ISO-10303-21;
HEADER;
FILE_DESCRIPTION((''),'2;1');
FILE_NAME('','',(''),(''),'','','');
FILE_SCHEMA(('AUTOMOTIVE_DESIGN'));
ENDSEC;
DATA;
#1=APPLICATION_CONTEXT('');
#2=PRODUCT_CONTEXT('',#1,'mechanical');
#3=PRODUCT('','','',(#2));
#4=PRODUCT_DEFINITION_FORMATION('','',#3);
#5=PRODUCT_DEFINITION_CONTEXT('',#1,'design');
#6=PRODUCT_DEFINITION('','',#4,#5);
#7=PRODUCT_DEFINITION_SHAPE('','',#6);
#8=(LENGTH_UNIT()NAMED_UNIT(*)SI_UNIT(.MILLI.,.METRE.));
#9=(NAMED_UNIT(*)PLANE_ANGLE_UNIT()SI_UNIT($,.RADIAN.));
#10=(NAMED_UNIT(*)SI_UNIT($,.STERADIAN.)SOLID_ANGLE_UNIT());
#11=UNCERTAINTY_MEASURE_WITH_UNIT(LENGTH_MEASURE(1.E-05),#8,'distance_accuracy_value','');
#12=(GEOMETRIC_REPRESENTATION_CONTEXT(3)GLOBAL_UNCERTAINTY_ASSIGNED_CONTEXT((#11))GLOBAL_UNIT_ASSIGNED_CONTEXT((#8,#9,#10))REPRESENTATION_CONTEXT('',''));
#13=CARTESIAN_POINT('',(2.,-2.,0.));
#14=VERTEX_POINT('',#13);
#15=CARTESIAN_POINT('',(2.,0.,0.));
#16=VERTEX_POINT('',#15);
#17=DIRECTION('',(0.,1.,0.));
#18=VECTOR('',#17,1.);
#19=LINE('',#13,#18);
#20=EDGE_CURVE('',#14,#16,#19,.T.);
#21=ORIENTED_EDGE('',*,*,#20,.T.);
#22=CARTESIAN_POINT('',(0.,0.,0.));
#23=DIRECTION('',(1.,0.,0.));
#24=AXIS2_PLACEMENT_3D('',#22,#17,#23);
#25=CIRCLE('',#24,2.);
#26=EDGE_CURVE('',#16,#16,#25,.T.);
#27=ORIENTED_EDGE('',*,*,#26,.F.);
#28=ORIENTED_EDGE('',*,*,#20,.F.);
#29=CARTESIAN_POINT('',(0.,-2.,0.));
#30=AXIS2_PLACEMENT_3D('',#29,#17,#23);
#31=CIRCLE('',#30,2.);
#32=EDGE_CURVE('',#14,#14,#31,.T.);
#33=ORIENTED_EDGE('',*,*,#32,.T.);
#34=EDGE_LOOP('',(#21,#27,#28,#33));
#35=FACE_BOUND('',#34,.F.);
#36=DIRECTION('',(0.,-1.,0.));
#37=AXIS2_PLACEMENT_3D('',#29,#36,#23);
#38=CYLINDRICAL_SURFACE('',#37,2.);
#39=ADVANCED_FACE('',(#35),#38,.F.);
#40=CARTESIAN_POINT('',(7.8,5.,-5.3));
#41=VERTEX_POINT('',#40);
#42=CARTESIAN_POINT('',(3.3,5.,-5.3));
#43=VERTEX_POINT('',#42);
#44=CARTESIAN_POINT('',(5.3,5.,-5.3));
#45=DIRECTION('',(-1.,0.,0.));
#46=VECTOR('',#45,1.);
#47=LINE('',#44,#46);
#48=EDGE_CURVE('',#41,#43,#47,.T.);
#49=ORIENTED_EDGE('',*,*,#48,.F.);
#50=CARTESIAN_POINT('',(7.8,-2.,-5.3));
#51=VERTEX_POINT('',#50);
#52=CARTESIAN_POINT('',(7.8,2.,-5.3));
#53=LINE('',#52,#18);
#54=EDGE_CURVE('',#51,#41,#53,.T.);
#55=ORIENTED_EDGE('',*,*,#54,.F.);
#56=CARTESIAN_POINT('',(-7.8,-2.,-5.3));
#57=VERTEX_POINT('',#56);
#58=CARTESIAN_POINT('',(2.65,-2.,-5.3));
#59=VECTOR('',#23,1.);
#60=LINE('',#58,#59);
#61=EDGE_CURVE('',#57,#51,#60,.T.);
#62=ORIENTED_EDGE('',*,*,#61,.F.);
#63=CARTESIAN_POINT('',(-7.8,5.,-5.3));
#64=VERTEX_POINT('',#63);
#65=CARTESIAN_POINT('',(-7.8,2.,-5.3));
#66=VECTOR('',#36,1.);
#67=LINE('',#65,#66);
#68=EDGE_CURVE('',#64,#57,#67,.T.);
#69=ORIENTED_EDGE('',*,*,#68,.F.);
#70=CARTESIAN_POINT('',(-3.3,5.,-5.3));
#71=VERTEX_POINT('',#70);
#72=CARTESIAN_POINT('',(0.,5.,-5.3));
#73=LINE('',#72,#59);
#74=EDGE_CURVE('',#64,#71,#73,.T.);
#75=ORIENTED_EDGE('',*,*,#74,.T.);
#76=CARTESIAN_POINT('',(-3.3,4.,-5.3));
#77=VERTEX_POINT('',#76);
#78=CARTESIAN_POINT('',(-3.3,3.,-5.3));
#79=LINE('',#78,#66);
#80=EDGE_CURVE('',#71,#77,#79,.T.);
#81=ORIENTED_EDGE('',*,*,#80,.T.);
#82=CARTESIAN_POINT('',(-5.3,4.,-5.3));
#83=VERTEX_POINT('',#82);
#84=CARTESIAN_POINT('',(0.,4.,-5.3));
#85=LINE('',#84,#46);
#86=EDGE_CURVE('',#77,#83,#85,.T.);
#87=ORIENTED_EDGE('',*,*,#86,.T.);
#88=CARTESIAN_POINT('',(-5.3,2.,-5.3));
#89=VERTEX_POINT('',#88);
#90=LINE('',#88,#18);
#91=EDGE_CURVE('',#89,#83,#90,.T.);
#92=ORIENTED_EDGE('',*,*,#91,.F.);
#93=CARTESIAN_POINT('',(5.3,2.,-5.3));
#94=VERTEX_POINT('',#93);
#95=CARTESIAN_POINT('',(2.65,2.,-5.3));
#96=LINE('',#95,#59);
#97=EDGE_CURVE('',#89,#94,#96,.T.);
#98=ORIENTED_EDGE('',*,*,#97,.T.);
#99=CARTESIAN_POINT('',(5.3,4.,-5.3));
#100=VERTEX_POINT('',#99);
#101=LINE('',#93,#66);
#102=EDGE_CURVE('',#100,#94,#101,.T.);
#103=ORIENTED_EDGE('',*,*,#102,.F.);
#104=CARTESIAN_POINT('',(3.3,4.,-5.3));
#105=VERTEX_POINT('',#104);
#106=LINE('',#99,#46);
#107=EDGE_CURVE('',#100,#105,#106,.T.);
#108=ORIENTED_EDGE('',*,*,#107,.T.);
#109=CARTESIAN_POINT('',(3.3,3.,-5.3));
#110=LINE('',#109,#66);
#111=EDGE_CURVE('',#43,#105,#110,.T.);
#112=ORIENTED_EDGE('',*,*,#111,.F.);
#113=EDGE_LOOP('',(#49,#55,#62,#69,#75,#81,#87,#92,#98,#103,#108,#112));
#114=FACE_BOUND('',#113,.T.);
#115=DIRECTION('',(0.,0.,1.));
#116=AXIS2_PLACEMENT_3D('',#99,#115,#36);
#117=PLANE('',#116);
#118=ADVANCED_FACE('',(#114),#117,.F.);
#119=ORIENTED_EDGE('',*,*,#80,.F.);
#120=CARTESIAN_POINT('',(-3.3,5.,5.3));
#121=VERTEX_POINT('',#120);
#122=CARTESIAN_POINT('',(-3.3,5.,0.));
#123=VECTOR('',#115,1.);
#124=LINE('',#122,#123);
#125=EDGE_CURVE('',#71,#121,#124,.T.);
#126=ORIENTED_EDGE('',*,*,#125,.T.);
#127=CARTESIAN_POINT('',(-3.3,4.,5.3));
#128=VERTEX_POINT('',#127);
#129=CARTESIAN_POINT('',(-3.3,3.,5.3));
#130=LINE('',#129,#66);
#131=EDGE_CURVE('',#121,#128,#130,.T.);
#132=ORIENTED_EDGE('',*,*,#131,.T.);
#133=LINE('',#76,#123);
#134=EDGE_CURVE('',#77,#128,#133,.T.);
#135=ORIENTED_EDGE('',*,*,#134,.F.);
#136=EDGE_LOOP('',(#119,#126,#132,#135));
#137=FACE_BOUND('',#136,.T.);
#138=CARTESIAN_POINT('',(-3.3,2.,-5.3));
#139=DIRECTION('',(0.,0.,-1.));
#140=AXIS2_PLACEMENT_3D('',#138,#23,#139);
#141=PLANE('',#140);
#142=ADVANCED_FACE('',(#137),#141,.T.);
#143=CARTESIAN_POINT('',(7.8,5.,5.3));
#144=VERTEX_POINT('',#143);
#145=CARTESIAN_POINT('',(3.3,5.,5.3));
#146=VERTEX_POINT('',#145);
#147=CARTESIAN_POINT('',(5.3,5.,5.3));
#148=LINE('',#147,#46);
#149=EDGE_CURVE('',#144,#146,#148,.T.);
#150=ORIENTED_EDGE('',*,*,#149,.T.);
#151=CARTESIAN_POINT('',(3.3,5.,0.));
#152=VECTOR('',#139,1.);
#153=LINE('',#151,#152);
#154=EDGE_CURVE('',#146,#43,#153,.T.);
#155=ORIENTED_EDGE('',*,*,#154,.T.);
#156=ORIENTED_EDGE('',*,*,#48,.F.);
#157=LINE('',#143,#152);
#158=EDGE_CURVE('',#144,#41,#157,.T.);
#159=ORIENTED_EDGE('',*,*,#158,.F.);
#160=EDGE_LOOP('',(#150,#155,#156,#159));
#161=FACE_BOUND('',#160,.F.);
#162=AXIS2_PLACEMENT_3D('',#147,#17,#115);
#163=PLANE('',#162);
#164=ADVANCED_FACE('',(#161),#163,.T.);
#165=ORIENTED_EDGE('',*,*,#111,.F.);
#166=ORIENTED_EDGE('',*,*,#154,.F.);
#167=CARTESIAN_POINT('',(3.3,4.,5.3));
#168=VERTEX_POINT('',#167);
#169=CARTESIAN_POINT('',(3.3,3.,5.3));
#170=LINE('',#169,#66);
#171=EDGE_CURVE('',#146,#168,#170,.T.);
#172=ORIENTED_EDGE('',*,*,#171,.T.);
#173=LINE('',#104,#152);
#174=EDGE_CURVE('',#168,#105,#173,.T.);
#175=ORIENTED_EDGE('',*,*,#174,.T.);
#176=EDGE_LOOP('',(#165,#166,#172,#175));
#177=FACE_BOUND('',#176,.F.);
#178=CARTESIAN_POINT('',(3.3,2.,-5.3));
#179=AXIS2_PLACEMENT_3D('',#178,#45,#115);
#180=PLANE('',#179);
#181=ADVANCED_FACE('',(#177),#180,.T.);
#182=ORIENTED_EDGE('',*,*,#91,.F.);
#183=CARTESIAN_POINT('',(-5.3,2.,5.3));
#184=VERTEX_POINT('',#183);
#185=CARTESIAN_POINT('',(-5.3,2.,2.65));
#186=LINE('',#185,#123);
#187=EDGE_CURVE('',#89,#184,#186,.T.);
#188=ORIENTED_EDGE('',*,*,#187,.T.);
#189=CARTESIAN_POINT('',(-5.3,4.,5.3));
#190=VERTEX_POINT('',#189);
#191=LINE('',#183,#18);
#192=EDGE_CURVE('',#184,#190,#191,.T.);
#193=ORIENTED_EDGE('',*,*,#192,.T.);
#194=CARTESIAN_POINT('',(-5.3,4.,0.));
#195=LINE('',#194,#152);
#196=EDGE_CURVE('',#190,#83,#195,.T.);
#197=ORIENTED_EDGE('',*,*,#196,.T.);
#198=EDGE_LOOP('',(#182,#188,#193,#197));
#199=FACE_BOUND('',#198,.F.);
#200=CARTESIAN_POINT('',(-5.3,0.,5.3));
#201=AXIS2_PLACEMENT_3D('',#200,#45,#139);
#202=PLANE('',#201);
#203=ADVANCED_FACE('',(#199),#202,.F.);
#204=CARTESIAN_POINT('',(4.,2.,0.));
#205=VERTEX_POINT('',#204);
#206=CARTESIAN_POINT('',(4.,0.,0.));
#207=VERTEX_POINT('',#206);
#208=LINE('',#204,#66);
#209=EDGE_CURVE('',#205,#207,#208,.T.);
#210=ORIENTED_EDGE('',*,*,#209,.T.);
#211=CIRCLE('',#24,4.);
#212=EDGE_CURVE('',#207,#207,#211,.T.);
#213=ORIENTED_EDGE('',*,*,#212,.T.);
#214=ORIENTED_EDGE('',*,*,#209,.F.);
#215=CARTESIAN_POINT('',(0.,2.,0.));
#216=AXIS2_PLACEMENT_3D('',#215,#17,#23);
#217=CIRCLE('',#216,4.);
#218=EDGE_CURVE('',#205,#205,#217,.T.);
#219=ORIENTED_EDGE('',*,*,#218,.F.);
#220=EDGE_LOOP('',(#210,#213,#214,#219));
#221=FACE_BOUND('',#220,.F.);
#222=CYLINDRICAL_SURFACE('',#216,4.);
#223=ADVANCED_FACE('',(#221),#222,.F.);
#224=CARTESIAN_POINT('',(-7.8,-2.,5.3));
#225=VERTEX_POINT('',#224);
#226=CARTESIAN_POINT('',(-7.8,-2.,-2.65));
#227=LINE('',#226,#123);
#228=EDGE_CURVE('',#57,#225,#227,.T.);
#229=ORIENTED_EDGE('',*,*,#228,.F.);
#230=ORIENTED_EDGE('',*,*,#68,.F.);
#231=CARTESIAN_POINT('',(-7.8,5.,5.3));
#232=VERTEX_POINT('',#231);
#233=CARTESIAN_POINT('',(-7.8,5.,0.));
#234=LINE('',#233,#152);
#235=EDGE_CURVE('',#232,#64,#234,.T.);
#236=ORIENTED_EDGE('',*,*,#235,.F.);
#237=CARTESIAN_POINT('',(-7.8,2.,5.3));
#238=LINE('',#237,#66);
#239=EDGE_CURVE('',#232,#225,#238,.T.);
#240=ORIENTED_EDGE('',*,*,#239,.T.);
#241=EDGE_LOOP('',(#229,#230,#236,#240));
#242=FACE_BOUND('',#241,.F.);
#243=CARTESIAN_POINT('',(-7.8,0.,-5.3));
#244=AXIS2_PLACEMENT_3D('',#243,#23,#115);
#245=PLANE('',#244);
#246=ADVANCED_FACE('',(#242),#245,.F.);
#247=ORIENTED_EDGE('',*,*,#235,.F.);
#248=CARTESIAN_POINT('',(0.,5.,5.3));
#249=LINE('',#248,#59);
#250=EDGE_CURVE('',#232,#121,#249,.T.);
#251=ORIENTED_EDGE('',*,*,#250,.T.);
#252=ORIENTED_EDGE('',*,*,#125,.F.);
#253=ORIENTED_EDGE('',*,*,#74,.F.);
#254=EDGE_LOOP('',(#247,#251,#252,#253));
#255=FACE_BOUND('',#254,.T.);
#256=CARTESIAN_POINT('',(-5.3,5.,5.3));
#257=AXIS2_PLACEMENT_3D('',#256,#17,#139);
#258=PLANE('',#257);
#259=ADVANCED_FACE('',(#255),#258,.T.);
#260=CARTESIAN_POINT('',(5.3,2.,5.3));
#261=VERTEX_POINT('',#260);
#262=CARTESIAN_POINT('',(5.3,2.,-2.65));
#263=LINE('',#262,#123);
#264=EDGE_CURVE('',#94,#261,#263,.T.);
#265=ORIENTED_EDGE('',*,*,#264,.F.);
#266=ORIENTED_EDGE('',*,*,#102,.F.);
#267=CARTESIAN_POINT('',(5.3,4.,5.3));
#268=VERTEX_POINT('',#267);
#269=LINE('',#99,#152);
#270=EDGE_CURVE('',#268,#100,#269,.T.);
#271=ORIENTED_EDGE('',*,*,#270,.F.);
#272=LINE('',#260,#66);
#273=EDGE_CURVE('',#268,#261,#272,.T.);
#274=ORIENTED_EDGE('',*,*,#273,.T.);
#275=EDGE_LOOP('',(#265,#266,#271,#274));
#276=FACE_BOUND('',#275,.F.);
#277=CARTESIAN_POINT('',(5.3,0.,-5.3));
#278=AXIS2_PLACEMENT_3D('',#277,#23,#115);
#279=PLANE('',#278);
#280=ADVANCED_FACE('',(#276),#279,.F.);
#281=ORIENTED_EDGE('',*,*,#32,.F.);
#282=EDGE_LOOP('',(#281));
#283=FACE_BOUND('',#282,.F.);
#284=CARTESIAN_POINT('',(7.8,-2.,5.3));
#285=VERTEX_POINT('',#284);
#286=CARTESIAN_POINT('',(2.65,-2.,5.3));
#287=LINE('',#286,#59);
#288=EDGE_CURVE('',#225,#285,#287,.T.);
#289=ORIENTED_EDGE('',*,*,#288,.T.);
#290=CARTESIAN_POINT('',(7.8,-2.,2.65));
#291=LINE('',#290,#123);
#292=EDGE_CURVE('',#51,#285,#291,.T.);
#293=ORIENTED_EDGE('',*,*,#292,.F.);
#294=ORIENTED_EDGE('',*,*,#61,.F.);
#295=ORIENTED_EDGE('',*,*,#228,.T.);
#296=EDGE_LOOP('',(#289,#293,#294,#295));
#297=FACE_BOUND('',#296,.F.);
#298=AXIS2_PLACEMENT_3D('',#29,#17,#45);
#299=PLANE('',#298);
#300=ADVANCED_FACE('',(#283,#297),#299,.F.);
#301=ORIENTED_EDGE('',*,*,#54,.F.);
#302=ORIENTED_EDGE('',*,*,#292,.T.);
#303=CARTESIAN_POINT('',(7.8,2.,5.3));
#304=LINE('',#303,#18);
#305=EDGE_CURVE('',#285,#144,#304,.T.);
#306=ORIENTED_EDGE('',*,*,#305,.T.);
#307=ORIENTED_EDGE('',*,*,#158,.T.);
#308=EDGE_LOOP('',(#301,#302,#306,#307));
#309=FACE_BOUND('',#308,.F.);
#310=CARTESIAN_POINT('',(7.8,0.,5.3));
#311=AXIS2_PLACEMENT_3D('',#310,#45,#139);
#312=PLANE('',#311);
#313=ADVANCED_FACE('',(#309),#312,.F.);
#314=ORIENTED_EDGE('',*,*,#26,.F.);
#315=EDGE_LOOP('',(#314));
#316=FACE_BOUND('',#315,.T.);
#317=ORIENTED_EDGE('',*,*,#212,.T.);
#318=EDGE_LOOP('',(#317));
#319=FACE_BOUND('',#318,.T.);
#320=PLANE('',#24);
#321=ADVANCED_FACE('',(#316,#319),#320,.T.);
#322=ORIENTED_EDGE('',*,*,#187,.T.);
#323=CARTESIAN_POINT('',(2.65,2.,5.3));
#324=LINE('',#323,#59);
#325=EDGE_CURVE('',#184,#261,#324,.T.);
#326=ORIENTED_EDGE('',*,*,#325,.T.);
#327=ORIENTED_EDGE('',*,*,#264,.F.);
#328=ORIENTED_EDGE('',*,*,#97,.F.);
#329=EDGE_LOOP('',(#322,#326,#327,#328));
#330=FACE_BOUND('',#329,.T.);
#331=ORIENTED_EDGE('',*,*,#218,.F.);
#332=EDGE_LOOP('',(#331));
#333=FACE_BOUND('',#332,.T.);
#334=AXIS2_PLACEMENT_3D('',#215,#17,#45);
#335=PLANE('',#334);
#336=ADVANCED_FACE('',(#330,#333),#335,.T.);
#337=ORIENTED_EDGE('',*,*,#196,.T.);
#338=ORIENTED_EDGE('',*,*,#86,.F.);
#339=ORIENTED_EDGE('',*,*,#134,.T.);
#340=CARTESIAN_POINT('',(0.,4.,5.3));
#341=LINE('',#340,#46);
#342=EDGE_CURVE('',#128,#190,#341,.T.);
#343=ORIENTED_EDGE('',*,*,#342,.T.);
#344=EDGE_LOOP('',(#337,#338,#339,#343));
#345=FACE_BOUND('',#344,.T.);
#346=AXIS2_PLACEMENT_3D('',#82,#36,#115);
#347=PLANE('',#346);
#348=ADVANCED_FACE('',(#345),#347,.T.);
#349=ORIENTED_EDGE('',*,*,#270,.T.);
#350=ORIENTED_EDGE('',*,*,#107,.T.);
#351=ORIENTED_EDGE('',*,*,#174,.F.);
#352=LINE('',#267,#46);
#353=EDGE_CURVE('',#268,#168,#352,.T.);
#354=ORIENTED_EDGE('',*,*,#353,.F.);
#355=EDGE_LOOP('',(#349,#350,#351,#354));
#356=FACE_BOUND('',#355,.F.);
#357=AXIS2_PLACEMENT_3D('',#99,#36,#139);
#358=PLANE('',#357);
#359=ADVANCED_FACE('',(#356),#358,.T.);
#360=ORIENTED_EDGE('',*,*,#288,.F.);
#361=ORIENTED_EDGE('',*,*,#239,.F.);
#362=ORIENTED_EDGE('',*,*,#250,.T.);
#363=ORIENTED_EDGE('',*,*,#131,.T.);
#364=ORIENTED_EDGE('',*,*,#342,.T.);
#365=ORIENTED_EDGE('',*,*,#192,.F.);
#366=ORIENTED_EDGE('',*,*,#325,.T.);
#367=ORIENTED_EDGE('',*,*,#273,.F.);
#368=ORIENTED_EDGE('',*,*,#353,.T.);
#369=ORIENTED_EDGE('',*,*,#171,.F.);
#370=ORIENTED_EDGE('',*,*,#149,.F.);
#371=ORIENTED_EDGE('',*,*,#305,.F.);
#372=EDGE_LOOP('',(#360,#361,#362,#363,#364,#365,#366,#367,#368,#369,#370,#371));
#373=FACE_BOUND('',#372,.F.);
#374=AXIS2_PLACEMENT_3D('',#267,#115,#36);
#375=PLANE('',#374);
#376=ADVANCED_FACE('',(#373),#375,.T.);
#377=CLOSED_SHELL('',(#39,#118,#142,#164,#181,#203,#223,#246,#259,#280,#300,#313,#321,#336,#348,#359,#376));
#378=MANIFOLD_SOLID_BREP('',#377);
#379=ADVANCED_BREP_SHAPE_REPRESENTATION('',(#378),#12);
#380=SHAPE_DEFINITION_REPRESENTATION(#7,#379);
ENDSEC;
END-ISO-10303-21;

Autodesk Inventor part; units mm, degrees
ref_plane "YZ Plane" through (0, 0, 0) normal (1, 0, 0) x (0, 1, 0)
ref_plane "XZ Plane" through (0, 0, 0) normal (0, 1, 0) x (-1, 0, 0)
ref_plane "XY Plane" through (0, 0, 0) normal (0, 0, 1) x (1, 0, 0)
sketch "Sketch1" plane through (0, 0, 0) normal (0, 1, 0) x (-1, 0, 0)
  line L0 (5.3, -5.3) -> (-5.3, -5.3)
  line L1 (-5.3, -5.3) -> (-5.3, 5.3)
  line L2 (-5.3, 5.3) -> (5.3, 5.3)
  line L3 (5.3, 5.3) -> (5.3, -5.3)
  line L4 (7.8, -5.3) -> (7.8, 5.3)
  line L5 (-7.8, 5.3) -> (-7.8, -5.3)
  line L6 (5.3, -5.3) -> (7.8, -5.3)
  line L7 (-5.3, -5.3) -> (-7.8, -5.3)
  line L8 (-5.3, 5.3) -> (-7.8, 5.3)
  line L9 (5.3, 5.3) -> (7.8, 5.3)
  point P0 (0, 0)
  point P1 (-5.3, 0)
  point P2 (0, -5.3)
  dimension "d0" = 10.6
  dimension "d1" = 10.6
extrude "Extrusion1" add sketch "Sketch1" along normal blind 2
extrude "Extrusion2" add sketch "Sketch1" along normal blind 5 contours L3 L9 L4 L6 | L7 L5 L8 L1
sketch "Sketch2" plane through (-5.3, 2, -5.3) normal (1, 0, 0) x (0, 0, -1)
  line L0 (0, 0) -> (-10.6, 0) projected
  line L1 (0, 0) -> (0, 3) projected
  line L2 (-10.6, 3) -> (0, 3) projected
  line L3 (-10.6, 0) -> (-10.6, 3) projected
  line L4 (-10.6, 3) -> (0, 3)
  line L5 (0, 3) -> (0, 2)
  line L6 (0, 2) -> (-10.6, 2)
  line L7 (-10.6, 2) -> (-10.6, 3)
  point P0 (-5.3, -2)
  dimension "d7" = 1
extrude "Extrusion3" add sketch "Sketch2" along normal blind 2 contours L6 L3 L2 L1
mirror "Mirror1" about plane through (0, 0, 0) normal (1, 0, 0) of "Extrusion3"
move faces "Move1" translate (0, -2, 0) faces at (-2.6, 0, 1.7667)
sketch "Sketch3" plane through (-7.8, -2, -5.3) normal (0, -1, 0) x (1, 0, 0)
  line L0 (15.6, 0) -> (0, 0) projected
  line L1 (15.6, 10.6) -> (15.6, 0) projected
  line L2 (0, 10.6) -> (15.6, 10.6) projected
  line L3 (0, 0) -> (0, 10.6) projected
  line L4 (7.8, 10.6) -> (7.8, 0)
  circle A0 centre (7.8, 5.3) radius 2
  dimension "d13" = 4
extrude "Extrusion4" cut sketch "Sketch3" against normal through all contours A0 L4 | L4 A0
sketch "Sketch4" plane through (0, 2, 0) normal (0, 1, 0) x (1, 0, 0)
  circle A0 centre (0, 0) radius 2 projected
  line L0 (-5.3, 5.3) -> (-5.3, -5.3) projected
  line L1 (-5.3, -5.3) -> (5.3, -5.3) projected
  line L2 (5.3, -5.3) -> (5.3, 5.3) projected
  line L3 (5.3, 5.3) -> (-5.3, 5.3) projected
  circle A1 centre (0, 0) radius 4
  dimension "d16" = 2
extrude "Extrusion5" cut sketch "Sketch4" against normal blind 2 contours A1
properties part number "MicroUSBClip"
